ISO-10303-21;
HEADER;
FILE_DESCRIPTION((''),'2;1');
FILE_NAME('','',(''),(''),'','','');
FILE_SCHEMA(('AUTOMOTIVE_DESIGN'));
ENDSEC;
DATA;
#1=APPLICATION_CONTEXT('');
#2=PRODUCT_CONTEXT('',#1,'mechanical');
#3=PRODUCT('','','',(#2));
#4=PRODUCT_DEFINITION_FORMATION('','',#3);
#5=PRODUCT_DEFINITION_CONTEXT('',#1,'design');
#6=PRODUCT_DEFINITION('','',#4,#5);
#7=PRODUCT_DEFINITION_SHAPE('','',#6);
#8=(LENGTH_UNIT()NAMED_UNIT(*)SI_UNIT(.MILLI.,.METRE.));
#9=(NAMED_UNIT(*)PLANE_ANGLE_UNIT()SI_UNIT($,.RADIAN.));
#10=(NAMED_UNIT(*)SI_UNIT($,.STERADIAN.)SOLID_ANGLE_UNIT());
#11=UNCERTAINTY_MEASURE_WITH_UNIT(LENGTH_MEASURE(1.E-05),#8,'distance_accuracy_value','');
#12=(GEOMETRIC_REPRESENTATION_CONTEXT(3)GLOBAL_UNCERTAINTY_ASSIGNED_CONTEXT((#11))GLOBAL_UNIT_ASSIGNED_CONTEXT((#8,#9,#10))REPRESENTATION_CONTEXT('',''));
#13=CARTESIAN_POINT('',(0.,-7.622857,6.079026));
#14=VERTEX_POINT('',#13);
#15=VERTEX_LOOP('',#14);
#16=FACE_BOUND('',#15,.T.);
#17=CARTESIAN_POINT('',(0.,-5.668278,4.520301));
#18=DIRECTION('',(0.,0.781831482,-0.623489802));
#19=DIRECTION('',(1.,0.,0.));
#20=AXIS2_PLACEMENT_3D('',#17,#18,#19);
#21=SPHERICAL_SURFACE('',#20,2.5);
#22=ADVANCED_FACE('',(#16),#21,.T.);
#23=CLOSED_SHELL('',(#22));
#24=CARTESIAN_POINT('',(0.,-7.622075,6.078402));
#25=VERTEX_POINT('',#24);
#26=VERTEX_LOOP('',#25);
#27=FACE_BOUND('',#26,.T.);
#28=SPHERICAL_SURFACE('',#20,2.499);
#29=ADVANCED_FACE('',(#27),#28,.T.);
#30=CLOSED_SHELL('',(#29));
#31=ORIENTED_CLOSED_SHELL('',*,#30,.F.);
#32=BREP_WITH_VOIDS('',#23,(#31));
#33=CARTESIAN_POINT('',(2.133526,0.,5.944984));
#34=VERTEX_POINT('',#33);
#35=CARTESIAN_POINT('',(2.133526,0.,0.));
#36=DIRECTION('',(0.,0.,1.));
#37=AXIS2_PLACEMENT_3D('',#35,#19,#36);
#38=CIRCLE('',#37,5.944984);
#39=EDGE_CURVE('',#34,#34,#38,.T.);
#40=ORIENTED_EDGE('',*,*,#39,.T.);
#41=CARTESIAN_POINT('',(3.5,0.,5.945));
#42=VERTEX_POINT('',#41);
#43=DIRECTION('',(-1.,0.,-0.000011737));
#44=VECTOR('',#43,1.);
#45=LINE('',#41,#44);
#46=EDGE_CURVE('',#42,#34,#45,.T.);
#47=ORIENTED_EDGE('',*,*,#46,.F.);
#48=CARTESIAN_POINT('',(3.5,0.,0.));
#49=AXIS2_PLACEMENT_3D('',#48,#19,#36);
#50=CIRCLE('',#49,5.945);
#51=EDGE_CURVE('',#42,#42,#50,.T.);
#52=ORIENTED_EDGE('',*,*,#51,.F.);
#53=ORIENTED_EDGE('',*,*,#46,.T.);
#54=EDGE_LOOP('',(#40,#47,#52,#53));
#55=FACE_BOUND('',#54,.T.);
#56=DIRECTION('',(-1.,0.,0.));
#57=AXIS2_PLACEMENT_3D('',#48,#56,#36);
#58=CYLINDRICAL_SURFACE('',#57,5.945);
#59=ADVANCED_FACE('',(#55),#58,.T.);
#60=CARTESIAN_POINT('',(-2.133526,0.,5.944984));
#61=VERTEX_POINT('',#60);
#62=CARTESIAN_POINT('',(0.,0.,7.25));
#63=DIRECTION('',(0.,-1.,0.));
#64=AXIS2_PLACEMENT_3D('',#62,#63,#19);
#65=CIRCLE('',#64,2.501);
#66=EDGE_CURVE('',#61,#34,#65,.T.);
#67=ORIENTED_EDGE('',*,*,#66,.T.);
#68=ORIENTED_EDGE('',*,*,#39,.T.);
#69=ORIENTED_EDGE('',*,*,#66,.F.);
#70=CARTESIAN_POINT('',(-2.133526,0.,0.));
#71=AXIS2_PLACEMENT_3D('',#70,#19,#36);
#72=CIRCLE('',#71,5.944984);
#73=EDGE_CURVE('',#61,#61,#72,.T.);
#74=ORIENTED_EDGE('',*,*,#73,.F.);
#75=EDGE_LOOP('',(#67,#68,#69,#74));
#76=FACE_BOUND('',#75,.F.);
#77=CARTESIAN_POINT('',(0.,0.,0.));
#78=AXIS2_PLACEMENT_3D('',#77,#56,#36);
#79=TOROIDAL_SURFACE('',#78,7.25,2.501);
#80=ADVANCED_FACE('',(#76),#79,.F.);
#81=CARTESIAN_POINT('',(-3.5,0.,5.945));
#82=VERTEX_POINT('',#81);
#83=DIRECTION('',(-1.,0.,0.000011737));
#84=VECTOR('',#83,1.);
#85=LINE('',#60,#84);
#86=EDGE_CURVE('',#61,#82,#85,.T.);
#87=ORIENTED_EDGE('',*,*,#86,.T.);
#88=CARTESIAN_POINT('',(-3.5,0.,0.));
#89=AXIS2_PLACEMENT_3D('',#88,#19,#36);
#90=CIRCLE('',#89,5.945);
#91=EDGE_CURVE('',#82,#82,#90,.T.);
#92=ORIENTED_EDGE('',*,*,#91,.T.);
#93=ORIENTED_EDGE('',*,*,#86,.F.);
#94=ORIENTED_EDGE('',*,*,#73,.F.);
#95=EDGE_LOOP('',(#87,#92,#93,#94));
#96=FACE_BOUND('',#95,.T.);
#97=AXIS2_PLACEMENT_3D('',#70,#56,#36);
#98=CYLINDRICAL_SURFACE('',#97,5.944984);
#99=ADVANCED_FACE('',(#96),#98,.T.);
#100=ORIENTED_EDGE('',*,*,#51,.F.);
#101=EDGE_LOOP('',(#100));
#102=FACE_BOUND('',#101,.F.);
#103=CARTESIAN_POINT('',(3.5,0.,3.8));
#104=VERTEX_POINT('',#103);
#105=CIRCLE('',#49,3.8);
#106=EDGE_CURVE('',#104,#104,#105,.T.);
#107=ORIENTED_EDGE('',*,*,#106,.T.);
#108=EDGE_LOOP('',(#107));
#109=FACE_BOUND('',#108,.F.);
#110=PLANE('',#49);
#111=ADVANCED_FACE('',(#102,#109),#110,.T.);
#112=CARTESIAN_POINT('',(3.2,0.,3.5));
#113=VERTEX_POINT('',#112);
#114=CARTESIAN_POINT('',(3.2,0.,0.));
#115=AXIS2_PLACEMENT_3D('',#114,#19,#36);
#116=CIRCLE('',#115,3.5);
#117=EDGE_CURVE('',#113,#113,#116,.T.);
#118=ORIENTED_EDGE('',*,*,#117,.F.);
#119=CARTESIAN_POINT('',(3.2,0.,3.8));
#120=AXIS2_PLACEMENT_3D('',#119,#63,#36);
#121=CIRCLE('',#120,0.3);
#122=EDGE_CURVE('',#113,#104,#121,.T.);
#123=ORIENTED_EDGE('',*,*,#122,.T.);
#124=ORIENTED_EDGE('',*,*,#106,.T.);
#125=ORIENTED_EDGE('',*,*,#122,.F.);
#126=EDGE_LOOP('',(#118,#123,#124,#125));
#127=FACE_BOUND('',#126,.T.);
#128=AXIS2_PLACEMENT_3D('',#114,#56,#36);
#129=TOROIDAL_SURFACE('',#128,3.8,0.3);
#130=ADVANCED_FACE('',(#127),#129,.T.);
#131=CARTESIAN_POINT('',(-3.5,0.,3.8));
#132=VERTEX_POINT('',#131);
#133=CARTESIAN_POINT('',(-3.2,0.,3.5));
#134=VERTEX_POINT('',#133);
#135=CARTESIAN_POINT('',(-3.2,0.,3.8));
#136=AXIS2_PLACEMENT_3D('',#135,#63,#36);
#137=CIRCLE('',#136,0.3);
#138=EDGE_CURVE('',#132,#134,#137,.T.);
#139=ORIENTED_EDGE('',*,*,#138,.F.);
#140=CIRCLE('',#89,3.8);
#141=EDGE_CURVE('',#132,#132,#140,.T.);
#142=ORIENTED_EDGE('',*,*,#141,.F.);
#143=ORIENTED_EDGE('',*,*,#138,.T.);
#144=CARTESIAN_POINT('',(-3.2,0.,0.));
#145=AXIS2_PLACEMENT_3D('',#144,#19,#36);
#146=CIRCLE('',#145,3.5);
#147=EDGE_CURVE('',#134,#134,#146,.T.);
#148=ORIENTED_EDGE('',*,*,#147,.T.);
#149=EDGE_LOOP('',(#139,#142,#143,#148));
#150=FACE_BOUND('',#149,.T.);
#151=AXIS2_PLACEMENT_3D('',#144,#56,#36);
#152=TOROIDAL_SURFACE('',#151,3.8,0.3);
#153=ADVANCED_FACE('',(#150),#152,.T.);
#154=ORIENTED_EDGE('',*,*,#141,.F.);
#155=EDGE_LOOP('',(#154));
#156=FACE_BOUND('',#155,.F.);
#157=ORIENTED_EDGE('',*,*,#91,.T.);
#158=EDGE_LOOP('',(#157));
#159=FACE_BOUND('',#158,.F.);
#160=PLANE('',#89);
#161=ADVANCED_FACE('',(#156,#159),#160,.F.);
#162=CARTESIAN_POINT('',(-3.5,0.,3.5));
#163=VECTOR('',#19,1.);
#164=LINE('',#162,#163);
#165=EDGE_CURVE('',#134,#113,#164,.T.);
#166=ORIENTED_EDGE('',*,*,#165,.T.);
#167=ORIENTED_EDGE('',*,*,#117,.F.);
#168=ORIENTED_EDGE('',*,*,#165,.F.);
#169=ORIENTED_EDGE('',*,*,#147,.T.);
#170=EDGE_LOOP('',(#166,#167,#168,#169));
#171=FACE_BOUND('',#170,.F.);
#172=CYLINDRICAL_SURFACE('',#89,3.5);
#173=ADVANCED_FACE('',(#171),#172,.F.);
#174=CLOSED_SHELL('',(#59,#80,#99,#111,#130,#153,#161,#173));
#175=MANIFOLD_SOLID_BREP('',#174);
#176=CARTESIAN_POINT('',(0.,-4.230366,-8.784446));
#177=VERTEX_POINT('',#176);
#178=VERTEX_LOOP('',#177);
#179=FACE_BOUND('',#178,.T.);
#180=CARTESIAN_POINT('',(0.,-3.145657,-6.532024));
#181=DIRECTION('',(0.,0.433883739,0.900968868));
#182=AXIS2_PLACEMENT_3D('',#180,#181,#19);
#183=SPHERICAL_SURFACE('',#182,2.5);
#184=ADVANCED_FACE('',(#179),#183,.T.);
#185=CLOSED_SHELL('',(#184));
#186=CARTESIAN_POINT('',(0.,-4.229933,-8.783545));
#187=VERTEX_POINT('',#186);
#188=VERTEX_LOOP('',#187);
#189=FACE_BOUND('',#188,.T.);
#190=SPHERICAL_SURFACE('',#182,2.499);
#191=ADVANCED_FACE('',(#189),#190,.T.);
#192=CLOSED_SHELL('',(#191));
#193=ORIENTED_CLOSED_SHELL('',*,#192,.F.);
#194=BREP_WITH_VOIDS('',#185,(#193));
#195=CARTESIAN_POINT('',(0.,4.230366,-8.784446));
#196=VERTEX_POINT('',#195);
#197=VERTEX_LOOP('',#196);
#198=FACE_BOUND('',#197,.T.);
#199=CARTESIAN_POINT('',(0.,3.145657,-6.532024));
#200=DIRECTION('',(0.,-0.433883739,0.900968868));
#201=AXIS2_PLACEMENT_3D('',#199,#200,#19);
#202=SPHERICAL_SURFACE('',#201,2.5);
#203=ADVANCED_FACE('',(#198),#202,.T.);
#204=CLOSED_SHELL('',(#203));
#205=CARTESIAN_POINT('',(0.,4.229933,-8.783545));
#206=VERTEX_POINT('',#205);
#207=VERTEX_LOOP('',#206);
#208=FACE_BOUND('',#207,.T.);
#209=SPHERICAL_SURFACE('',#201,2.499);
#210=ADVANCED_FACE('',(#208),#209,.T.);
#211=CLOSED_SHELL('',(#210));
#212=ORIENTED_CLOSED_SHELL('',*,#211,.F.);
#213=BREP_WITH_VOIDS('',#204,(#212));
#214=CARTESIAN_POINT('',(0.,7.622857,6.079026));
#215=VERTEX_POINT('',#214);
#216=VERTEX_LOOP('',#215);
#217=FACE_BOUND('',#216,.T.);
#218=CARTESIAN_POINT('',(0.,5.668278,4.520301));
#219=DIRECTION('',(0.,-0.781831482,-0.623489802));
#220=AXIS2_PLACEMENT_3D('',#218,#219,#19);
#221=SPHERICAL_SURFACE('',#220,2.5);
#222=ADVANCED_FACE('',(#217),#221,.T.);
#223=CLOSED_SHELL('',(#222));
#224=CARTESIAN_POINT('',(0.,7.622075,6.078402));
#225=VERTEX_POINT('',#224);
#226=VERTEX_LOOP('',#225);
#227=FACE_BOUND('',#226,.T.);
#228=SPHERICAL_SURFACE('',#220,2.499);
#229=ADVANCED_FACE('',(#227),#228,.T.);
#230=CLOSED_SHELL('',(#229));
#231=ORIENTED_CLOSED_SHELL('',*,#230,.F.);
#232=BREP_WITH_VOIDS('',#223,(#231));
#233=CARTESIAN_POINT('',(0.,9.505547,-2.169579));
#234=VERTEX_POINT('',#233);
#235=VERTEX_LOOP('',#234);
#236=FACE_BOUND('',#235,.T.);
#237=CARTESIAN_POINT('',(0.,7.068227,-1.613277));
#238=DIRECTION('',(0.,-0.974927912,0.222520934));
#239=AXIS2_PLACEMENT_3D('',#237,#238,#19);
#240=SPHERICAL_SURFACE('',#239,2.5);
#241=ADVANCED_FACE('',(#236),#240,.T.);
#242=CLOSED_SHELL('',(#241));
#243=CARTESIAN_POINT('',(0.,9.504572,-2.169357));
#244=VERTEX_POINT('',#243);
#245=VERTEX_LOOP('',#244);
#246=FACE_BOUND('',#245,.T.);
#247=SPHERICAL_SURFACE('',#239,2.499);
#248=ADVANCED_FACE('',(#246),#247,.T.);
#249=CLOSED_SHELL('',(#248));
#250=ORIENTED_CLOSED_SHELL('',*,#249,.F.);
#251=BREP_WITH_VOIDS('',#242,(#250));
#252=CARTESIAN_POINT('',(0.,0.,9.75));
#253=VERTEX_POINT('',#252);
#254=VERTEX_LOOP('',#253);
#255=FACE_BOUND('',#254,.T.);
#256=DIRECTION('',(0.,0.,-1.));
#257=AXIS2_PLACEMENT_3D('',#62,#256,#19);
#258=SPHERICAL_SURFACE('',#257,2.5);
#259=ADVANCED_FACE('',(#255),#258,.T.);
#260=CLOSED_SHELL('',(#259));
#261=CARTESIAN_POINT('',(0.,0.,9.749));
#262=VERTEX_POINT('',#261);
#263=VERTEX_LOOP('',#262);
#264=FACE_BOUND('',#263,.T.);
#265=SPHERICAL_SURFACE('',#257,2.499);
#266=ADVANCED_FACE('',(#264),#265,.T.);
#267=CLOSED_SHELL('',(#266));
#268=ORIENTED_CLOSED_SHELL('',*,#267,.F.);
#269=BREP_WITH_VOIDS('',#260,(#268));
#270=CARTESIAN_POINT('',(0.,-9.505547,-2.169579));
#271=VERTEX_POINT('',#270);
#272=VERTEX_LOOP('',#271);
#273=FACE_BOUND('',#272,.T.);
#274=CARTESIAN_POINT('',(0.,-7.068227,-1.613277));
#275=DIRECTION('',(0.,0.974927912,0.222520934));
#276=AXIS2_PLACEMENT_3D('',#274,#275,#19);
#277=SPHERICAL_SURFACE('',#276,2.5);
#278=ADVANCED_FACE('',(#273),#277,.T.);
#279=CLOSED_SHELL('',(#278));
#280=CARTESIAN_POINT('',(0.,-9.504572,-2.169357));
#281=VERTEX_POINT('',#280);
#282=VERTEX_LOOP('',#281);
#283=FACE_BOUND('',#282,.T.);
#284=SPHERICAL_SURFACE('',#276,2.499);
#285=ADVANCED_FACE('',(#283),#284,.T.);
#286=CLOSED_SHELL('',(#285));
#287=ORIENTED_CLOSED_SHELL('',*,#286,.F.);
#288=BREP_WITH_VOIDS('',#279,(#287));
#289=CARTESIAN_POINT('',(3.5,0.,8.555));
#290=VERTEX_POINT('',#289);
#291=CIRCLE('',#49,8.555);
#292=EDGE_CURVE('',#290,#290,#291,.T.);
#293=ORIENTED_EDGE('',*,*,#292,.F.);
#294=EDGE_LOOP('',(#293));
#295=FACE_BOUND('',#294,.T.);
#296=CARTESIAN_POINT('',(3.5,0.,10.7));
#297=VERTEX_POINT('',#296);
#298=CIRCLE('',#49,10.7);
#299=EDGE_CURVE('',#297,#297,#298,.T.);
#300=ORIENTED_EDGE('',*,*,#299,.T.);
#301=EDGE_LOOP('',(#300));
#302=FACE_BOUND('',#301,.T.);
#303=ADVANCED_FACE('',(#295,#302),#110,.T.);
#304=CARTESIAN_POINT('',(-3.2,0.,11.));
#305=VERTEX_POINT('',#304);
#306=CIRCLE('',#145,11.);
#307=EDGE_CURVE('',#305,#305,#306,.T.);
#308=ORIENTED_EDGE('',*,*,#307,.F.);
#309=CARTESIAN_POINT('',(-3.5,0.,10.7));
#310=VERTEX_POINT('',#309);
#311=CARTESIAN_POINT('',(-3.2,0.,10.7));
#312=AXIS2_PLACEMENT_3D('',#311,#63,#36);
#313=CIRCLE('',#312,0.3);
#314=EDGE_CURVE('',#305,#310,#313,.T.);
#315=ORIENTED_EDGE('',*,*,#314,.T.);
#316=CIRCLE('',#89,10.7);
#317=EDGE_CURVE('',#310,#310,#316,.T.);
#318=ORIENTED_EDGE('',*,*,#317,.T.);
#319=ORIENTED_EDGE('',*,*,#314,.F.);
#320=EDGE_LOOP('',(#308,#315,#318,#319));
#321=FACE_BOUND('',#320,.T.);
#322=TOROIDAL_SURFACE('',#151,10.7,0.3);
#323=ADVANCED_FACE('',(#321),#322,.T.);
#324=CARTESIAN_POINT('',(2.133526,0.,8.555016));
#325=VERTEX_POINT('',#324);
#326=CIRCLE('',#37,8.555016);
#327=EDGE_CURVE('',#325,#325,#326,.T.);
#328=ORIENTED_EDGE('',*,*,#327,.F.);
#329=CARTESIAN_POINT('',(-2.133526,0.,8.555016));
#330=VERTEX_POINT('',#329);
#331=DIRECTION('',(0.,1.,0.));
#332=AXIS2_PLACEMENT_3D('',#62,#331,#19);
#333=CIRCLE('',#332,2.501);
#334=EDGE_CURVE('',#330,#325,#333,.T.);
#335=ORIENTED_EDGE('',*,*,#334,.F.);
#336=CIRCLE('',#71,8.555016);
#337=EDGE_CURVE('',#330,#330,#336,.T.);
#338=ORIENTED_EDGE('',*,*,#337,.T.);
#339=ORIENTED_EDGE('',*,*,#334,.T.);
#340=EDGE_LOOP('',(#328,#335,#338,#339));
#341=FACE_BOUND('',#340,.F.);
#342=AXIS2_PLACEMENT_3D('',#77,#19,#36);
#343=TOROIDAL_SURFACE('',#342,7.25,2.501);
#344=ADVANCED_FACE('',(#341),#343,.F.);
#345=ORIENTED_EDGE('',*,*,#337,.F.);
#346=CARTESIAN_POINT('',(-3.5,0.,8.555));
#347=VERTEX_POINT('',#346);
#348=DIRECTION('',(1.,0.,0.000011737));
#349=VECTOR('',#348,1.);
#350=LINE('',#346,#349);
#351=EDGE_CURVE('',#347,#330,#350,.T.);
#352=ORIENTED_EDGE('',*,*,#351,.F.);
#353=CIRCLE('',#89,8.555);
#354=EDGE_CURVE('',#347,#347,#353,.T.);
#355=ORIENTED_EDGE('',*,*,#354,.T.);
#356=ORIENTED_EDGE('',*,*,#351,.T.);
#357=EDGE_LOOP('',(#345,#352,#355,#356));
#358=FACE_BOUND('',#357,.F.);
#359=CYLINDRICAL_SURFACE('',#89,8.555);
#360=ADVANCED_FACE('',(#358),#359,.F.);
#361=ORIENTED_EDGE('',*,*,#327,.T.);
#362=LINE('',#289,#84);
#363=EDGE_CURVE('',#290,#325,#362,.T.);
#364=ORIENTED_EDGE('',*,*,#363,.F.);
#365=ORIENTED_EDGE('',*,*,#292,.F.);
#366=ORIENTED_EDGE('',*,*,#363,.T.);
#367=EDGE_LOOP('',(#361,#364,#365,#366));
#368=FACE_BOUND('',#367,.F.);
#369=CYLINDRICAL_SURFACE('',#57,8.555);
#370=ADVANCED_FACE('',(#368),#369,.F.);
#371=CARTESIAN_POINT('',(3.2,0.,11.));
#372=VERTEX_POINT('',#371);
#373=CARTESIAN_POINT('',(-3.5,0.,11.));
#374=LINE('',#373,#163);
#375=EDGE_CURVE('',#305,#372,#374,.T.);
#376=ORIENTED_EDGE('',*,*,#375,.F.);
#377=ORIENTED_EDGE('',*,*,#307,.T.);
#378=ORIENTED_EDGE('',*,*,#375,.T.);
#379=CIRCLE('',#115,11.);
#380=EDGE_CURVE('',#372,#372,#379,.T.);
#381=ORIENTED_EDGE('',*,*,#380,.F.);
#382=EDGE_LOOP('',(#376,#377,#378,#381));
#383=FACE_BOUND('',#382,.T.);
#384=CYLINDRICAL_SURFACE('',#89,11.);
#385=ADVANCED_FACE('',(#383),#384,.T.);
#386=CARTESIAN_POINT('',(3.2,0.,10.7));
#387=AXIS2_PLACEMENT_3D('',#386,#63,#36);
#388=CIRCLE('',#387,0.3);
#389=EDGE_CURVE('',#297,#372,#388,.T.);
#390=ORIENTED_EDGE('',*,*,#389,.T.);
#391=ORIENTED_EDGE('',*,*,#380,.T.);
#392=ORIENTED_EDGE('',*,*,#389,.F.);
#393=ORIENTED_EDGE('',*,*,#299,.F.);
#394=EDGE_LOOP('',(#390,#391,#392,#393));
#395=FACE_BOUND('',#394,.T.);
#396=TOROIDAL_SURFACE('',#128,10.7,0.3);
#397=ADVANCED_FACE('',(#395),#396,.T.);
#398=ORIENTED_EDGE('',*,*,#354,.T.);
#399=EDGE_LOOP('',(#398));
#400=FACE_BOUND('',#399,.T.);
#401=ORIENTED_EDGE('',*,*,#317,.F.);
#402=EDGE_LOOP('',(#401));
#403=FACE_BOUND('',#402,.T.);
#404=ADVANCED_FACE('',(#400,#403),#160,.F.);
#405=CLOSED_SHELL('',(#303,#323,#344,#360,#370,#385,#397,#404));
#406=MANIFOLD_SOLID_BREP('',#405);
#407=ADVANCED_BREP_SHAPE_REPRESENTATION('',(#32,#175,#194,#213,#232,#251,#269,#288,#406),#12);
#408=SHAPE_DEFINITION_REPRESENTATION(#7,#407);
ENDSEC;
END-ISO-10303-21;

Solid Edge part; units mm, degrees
sketch "Sketch1" plane through (0, 0, 0) normal (0, -1, 0) x (1, 0, 0)
  arc A0 (0, 9.75) -> (0, 4.75) centre (0, 7.25) cw
  dimension "D1" = 2.5
revolve "RevolvedProtrusion1" add sketch "Sketch1" angle 360 about axis through (0, 0, 30.6346) along (0, 0, 1)
shell "Thinwall1" thickness 0.001 removed faces 0
pattern_circular "Pattern1" count 7 over 360 about axis through (0, 0, 0) along (1, 0, 0) of "RevolvedProtrusion1", "Thinwall1"
sketch "Sketch2" plane through (0, 0, 0) normal (0, -1, 0) x (1, 0, 0)
  line L0 (-3.5, 5.945) -> (-3.5, 3.5)
  line L1 (-3.5, 3.5) -> (3.5, 3.5)
  line L2 (3.5, 3.5) -> (3.5, 5.945)
  line L3 (3.5, 5.945) -> (2.1335, 5.945)
  arc A0 (-2.1335, 5.945) -> (2.1335, 5.945) centre (0, 7.25) ccw
  line L4 (-2.1335, 5.945) -> (-3.5, 5.945)
  line L5 (-3.5, 8.555) -> (-2.1335, 8.555)
  arc A1 (-2.1335, 8.555) -> (2.1335, 8.555) centre (0, 7.25) cw
  line L6 (3.5, 8.555) -> (2.1335, 8.555)
  line L7 (3.5, 11) -> (3.5, 8.555)
  line L8 (-3.5, 11) -> (3.5, 11)
  line L9 (-3.5, 8.555) -> (-3.5, 11)
  dimension "D1" = 7
  dimension "D2" = 2.501
  dimension "D3" = 2.501
revolve "RevolvedProtrusion2" add sketch "Sketch2" angle 360 about axis through (-60, 0, 0) along (1, 0, 0)
fillet "Round1" radius 0.3 4 edges at (-3.5, 0, -11) (3.5, 0, -11) (3.5, 0, -3.5) (-3.5, 0, -3.5)
properties material "Steel"
